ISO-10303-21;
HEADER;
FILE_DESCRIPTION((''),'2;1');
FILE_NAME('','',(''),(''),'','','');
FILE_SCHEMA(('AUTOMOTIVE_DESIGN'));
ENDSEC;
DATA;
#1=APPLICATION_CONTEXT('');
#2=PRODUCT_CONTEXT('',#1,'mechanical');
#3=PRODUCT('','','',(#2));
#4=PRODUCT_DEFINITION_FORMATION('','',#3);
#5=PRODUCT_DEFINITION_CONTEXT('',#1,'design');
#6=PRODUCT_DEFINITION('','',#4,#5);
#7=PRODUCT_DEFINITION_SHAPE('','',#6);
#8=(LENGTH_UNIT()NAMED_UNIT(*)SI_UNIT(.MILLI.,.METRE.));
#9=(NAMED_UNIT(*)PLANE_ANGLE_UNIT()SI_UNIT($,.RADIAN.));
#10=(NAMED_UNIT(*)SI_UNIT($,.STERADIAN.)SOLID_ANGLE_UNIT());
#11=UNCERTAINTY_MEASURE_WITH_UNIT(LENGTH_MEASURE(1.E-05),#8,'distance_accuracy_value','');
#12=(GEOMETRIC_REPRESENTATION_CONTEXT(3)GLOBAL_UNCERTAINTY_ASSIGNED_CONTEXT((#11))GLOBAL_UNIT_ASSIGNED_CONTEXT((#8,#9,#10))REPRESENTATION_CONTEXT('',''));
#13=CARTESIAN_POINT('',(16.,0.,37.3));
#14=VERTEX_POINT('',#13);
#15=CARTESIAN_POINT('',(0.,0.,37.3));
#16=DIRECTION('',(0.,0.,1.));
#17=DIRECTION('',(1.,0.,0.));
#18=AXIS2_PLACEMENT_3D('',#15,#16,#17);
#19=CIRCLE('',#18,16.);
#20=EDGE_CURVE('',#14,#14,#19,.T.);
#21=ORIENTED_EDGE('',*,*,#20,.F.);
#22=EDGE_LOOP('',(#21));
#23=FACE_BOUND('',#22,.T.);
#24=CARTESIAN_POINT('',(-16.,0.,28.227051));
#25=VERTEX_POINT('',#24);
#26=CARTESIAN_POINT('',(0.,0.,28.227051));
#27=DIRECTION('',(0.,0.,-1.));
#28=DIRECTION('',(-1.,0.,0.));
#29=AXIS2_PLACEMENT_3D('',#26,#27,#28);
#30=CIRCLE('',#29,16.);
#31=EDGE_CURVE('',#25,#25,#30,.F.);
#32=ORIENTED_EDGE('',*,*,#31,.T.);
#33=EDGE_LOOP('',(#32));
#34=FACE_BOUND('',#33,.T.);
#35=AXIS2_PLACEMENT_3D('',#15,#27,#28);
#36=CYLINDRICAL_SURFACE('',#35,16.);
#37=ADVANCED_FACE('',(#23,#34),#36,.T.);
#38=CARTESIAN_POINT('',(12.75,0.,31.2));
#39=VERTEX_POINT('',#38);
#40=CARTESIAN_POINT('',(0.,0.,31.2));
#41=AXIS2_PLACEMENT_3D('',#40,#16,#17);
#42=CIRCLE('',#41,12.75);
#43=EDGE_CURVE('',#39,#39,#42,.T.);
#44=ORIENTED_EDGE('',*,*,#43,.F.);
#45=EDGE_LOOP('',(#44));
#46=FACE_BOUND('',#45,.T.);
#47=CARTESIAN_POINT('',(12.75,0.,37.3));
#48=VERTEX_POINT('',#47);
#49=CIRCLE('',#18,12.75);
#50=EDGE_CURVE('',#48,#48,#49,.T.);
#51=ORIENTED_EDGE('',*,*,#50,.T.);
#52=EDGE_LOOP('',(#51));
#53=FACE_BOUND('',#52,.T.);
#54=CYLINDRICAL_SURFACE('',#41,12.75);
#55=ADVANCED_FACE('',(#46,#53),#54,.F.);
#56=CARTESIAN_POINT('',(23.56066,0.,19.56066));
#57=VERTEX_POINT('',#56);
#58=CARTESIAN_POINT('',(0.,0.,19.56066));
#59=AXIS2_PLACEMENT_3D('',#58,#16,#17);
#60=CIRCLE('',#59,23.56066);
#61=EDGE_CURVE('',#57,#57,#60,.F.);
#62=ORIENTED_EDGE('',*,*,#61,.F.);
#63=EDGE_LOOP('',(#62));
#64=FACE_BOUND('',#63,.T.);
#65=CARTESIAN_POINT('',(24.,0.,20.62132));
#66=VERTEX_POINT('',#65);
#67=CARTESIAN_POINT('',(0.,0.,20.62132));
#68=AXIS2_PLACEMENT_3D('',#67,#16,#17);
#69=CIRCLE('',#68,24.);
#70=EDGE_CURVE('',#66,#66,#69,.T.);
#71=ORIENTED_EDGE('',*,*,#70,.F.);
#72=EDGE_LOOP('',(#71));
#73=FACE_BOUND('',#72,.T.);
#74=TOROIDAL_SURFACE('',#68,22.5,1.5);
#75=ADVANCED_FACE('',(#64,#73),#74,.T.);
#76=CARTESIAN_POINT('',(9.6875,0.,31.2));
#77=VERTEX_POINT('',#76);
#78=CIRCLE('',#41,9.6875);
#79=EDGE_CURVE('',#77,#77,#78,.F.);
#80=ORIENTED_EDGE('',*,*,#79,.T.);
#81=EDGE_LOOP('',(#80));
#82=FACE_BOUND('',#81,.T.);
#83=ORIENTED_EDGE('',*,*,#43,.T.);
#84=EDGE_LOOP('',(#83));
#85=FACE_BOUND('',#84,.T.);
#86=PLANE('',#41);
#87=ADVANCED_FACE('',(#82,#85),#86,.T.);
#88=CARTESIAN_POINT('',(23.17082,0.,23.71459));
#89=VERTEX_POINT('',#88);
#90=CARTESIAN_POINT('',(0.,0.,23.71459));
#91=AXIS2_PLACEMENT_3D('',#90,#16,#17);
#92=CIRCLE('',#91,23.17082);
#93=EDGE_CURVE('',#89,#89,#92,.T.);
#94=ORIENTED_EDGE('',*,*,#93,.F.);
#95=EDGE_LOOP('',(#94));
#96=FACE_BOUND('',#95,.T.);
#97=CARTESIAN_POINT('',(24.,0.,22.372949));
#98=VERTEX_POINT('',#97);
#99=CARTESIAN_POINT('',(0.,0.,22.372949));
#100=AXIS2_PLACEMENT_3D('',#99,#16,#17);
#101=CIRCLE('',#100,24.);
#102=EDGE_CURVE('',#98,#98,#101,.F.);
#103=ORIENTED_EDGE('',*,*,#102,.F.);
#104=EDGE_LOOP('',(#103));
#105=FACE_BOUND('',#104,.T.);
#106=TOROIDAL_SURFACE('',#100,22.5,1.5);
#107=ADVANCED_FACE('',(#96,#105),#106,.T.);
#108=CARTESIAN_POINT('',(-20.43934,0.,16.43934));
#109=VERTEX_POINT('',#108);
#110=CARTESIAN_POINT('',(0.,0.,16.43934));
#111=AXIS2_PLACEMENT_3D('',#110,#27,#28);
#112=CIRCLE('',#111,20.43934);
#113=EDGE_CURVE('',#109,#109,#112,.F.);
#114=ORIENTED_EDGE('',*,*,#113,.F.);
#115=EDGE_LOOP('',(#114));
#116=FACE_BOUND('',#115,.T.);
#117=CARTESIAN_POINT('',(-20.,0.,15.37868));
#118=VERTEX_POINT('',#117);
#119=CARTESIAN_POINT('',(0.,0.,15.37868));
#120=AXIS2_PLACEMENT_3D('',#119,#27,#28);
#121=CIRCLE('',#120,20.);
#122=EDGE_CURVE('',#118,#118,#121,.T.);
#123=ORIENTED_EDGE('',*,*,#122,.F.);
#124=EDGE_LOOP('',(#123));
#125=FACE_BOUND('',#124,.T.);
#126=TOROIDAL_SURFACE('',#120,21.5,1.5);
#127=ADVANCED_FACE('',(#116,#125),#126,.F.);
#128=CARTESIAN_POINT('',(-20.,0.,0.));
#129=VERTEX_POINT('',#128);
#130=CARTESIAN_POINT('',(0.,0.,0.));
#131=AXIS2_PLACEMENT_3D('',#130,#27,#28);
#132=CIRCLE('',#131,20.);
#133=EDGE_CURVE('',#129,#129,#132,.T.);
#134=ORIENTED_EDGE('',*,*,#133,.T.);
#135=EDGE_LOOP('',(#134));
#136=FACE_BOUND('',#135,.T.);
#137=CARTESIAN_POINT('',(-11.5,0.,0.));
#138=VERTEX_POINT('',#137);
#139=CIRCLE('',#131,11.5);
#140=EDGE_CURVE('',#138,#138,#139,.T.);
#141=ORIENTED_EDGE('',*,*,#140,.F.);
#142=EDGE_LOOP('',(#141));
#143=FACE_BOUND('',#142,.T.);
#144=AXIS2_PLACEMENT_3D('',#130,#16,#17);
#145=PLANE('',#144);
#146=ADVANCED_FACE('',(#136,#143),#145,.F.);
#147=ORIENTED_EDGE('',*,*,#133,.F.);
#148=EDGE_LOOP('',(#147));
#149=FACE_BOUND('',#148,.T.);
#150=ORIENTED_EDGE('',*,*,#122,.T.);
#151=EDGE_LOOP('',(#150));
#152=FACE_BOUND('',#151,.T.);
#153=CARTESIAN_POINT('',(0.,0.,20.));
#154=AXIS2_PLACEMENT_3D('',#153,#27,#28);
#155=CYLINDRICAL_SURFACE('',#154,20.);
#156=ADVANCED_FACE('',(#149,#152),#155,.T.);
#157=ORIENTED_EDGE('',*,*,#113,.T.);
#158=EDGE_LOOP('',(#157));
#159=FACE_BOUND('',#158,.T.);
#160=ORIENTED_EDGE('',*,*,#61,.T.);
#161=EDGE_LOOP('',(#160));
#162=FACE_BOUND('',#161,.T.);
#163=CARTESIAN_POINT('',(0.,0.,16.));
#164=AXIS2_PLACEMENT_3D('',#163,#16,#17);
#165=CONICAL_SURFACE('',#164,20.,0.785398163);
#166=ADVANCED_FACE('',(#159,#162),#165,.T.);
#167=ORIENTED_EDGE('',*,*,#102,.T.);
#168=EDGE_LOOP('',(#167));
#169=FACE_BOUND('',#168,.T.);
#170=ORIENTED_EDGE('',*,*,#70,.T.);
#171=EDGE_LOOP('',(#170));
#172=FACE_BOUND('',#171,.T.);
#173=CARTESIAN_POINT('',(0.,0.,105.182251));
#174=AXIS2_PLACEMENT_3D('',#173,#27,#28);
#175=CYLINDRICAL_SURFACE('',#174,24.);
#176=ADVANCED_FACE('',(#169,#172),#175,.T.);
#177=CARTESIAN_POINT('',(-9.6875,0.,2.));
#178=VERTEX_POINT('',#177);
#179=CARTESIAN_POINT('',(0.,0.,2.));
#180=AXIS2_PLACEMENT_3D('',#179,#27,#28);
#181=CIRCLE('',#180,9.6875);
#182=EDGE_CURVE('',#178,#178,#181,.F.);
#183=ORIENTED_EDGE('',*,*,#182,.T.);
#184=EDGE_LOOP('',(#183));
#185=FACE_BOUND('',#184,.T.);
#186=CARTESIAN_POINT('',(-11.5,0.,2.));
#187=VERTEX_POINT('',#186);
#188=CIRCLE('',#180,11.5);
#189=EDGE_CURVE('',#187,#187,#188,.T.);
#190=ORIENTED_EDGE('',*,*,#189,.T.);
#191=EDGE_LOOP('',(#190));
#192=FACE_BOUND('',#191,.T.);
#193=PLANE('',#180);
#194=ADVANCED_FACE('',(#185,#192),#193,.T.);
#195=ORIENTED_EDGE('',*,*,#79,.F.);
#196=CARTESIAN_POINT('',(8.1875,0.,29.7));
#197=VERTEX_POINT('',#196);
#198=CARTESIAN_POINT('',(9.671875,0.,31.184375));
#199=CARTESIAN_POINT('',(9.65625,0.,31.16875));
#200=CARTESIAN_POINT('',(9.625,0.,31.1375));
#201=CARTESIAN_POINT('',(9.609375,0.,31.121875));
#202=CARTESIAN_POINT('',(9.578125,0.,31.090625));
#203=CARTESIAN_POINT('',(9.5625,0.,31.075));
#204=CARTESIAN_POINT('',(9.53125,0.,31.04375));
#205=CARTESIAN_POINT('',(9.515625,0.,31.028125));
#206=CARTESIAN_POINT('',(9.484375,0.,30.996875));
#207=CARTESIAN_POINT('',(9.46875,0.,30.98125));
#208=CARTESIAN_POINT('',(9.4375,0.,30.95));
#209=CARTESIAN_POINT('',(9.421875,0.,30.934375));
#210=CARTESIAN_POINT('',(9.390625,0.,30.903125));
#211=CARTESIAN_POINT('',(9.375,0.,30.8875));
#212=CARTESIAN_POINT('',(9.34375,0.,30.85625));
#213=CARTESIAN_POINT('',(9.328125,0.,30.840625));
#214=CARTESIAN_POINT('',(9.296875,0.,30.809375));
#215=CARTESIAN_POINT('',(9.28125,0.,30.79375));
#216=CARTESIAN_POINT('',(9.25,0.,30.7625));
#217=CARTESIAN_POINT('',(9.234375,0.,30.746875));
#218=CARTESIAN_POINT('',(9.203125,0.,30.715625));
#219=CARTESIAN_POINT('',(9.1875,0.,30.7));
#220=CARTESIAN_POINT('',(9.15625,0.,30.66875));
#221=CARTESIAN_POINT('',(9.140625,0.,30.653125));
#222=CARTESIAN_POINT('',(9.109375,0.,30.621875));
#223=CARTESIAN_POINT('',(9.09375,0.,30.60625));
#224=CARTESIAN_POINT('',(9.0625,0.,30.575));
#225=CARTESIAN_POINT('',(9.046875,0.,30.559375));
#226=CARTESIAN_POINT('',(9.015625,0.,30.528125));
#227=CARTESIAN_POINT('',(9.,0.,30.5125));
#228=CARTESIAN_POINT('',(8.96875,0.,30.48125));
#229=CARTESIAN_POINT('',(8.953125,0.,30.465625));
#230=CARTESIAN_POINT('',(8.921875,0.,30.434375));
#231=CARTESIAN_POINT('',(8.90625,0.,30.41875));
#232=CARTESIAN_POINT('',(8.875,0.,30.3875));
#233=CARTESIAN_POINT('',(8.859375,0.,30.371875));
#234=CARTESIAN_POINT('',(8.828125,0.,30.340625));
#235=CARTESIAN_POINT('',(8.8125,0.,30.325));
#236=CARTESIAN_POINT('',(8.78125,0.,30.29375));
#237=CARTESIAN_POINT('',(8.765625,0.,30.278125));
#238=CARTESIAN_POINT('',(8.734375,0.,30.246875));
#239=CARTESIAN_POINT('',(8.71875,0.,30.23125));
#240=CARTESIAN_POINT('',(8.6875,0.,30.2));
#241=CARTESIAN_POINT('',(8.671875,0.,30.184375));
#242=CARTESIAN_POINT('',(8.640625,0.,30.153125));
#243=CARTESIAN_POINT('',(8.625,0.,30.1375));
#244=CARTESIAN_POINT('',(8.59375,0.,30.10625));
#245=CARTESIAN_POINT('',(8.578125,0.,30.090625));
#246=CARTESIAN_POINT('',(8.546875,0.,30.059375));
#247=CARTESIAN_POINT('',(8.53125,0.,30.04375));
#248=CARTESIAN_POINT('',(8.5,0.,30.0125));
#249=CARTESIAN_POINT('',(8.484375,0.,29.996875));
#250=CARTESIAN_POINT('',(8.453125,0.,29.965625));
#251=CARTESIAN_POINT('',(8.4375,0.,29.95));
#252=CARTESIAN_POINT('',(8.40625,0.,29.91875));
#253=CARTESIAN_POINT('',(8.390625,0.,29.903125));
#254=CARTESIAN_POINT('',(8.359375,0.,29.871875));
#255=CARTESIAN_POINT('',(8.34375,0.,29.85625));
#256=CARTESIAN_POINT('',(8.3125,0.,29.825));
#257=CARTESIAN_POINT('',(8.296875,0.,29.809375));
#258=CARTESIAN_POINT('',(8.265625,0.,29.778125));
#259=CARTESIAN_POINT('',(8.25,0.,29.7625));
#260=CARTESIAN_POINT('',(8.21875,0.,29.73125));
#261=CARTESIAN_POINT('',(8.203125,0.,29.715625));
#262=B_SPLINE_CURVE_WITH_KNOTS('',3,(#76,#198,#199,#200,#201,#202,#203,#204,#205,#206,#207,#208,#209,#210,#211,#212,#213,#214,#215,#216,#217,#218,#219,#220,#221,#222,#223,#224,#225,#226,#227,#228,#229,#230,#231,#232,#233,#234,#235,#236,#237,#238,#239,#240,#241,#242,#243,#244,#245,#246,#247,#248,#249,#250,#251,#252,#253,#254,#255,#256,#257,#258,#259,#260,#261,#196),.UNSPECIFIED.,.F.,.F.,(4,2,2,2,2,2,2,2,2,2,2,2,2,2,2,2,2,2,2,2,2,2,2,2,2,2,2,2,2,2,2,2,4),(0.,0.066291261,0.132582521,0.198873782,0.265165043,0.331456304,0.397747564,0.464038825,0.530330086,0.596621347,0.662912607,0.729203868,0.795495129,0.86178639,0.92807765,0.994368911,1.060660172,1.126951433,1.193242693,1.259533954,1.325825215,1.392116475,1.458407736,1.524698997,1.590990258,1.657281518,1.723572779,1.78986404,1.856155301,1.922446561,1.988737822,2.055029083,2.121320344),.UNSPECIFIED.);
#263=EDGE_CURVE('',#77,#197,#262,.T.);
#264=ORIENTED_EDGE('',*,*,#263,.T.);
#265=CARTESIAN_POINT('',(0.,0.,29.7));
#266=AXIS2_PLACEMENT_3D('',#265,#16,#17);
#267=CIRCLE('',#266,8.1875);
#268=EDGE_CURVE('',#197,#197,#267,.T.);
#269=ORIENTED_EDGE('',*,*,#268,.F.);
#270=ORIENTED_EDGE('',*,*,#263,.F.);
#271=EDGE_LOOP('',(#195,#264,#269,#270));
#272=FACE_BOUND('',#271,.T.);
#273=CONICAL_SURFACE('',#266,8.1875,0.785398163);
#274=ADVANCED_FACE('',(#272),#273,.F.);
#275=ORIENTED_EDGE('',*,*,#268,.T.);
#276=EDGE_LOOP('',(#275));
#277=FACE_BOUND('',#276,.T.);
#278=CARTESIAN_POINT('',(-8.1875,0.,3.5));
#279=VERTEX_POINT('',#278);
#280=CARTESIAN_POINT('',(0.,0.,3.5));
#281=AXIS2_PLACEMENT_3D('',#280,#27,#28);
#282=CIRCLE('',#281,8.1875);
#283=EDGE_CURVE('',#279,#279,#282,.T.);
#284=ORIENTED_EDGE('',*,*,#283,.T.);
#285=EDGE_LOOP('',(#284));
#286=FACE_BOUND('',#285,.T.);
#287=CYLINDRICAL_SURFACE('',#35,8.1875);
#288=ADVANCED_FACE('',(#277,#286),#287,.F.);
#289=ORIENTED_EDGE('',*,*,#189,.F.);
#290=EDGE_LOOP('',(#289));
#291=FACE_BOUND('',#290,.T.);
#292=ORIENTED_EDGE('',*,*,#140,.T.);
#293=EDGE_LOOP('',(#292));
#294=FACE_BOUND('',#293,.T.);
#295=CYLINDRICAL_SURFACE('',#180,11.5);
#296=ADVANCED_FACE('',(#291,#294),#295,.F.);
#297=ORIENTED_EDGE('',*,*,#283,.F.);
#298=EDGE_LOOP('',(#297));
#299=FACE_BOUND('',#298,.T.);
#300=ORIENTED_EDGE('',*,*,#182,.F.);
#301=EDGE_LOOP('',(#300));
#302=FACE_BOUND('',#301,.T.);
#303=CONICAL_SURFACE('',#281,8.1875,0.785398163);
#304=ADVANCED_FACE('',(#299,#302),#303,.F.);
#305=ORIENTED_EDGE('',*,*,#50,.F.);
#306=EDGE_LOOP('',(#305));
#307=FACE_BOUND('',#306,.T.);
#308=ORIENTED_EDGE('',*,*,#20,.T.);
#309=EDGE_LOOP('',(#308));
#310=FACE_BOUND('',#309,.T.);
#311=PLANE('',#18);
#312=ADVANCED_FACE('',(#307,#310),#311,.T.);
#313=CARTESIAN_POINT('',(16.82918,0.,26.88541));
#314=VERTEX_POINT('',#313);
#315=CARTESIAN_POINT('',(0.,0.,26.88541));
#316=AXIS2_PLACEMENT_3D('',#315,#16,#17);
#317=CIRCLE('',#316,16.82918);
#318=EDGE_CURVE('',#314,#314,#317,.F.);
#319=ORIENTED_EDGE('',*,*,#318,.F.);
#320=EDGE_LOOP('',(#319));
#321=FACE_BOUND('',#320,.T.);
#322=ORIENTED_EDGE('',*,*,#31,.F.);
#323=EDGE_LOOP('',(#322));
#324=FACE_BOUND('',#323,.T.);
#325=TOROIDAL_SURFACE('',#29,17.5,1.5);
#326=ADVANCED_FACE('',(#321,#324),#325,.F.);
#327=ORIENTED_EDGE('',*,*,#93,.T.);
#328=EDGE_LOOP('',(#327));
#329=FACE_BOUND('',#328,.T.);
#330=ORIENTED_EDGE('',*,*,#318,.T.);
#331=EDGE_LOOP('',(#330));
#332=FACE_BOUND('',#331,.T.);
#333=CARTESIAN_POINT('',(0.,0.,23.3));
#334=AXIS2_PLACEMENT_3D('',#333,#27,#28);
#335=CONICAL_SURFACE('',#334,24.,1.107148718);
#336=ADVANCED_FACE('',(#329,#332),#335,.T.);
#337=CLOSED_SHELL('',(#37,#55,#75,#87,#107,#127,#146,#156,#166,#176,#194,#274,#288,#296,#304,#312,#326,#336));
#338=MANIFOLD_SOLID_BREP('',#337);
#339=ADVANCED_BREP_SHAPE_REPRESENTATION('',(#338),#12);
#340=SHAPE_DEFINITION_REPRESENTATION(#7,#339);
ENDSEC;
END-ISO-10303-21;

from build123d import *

# Parameters (mm, degrees)
SKETCH1_R           = 21
SKETCH1_R_2         = 8.1875
BOSS_EXTRUDE1_DEPTH = 37.3
SKETCH2_R           = 24
SKETCH2_R_2         = 21
BOSS_EXTRUDE2_DEPTH = 27.3
SKETCH3_R           = 12.75
CUT_EXTRUDE1_DEPTH  = 6.1
SKETCH4_R           = 11.5
CUT_EXTRUDE2_DEPTH  = 2
MOVE_FACE2_BY       = 5
SKETCH6_R           = 24
SKETCH6_R_2         = 20
CUT_EXTRUDE3_DEPTH  = 20
CHAMFER1_SIZE2      = 4
CHAMFER1_SIZE       = 8
CHAMFER2_SIZE       = 1.5
CHAMFER3_SIZE       = 4


with BuildPart() as part:
    # Sketch1 → Boss-Extrude1 (new body)
    with BuildSketch(Plane.XY):
        Circle(SKETCH1_R)
        Circle(SKETCH1_R_2, mode=Mode.SUBTRACT)
    extrude(amount=BOSS_EXTRUDE1_DEPTH)

    # Sketch2 → Boss-Extrude2 (add)
    with BuildSketch(Plane(origin=(0, 0, 0), x_dir=(-1, 0, 0), z_dir=(0, 0, -1))):
        Circle(SKETCH2_R)
        with Locations(Location((0, 0, 0), (0, 0, 180))):
            Circle(SKETCH2_R_2, mode=Mode.SUBTRACT)
    extrude(amount=-BOSS_EXTRUDE2_DEPTH)

    # Sketch3 → Cut-Extrude1 (cut)
    with BuildSketch(Plane.XY.offset(37.3)):
        Circle(SKETCH3_R)
    extrude(amount=-CUT_EXTRUDE1_DEPTH, mode=Mode.SUBTRACT)

    # Sketch4 → Cut-Extrude2 (cut)
    with BuildSketch(Plane(origin=(0, 0, 0), x_dir=(-1, 0, 0), z_dir=(0, 0, -1))):
        Circle(SKETCH4_R)
    extrude(amount=-CUT_EXTRUDE2_DEPTH, mode=Mode.SUBTRACT)

    # Move Face2: a curved face moved inward by 5.0
    add(Solid.thicken(part.faces().sort_by_distance((-21, 0, 32.3))[0], -MOVE_FACE2_BY), mode=Mode.SUBTRACT)

    # Sketch6 → Cut-Extrude3 (cut)
    with BuildSketch(Plane(origin=(0, 0, 0), x_dir=(-1, 0, 0), z_dir=(0, 0, -1))):
        Circle(SKETCH6_R)
        Circle(SKETCH6_R_2, mode=Mode.SUBTRACT)
    extrude(amount=-CUT_EXTRUDE3_DEPTH, mode=Mode.SUBTRACT)

    # Chamfer1
    chamfer1_edges = [part.edges().sort_by_distance(p)[0] for p in [
        (24, 0, 27.3),
    ]]
    chamfer1_side = [part.faces().sort_by_distance(p)[0] for p in [
        (23.92, 0, 27.3),
    ]]
    chamfer(chamfer1_edges, length=CHAMFER1_SIZE - 0.0001, length2=CHAMFER1_SIZE2 - 0.0001, reference=chamfer1_side[0])  # a hair under: the kernel refuses the full size

    # Chamfer2
    chamfer2_edges = [part.edges().sort_by_distance(p)[0] for p in [
        (-8.1875, 0, 31.2),
        (-8.1875, 0, 2),
    ]]
    chamfer(chamfer2_edges, length=CHAMFER2_SIZE)

    # Fillet1: read off the stored shape, not the designer's step
    # Fillet1 outline → Fillet1 (revolve, cut)
    with BuildSketch(Plane.XZ):
        with BuildLine():
            ThreePointArc((23.170820393, 23.714589803), (23.775976213, 23.161545685), (24, 22.372949017))
            Line((24, 22.372949017), (24, 23.714589803))
            Line((24, 23.714589803), (23.170820393, 23.714589803))
        make_face()
    revolve(axis=Axis((0, 0, 0), (0, 0, 1)), mode=Mode.SUBTRACT)

    # Fillet1 2 outline → Fillet1 2 (revolve)
    with BuildSketch(Plane.XZ):
        with BuildLine():
            Line((16, 26.885410197), (16.829179607, 26.885410197))
            ThreePointArc((16.829179607, 26.885410197), (16.224023787, 27.438454315), (16, 28.227050983))
            Line((16, 28.227050983), (16, 26.885410197))
        make_face()
    revolve(axis=Axis((0, 0, 0), (0, 0, 1)))

    # Chamfer3
    chamfer3_edges = [part.edges().sort_by_distance(p)[0] for p in [
        (20, 0, 20),
    ]]
    chamfer(chamfer3_edges, length=CHAMFER3_SIZE - 0.0001)  # a hair under: the kernel refuses the full size

    # Fillet3: read off the stored shape, not the designer's step
    # Fillet3 outline → Fillet3 (revolve, cut)
    with BuildSketch(Plane.XZ):
        with BuildLine():
            ThreePointArc((24, 20.621320344), (23.885819299, 20.047295195), (23.560660172, 19.560660172))
            Line((23.560660172, 19.560660172), (24, 19.560660172))
            Line((24, 19.560660172), (24, 20.621320344))
        make_face()
    revolve(axis=Axis((0, 0, 0), (0, 0, 1)), mode=Mode.SUBTRACT)

    # Fillet3 2 outline → Fillet3 2 (revolve)
    with BuildSketch(Plane.XZ):
        with BuildLine():
            ThreePointArc((20, 15.378679656), (20.114180701, 15.952704805), (20.439339828, 16.439339828))
            Line((20.439339828, 16.439339828), (20, 16.439339828))
            Line((20, 16.439339828), (20, 15.378679656))
        make_face()
    revolve(axis=Axis((0, 0, 0), (0, 0, 1)))


solid = part.part
